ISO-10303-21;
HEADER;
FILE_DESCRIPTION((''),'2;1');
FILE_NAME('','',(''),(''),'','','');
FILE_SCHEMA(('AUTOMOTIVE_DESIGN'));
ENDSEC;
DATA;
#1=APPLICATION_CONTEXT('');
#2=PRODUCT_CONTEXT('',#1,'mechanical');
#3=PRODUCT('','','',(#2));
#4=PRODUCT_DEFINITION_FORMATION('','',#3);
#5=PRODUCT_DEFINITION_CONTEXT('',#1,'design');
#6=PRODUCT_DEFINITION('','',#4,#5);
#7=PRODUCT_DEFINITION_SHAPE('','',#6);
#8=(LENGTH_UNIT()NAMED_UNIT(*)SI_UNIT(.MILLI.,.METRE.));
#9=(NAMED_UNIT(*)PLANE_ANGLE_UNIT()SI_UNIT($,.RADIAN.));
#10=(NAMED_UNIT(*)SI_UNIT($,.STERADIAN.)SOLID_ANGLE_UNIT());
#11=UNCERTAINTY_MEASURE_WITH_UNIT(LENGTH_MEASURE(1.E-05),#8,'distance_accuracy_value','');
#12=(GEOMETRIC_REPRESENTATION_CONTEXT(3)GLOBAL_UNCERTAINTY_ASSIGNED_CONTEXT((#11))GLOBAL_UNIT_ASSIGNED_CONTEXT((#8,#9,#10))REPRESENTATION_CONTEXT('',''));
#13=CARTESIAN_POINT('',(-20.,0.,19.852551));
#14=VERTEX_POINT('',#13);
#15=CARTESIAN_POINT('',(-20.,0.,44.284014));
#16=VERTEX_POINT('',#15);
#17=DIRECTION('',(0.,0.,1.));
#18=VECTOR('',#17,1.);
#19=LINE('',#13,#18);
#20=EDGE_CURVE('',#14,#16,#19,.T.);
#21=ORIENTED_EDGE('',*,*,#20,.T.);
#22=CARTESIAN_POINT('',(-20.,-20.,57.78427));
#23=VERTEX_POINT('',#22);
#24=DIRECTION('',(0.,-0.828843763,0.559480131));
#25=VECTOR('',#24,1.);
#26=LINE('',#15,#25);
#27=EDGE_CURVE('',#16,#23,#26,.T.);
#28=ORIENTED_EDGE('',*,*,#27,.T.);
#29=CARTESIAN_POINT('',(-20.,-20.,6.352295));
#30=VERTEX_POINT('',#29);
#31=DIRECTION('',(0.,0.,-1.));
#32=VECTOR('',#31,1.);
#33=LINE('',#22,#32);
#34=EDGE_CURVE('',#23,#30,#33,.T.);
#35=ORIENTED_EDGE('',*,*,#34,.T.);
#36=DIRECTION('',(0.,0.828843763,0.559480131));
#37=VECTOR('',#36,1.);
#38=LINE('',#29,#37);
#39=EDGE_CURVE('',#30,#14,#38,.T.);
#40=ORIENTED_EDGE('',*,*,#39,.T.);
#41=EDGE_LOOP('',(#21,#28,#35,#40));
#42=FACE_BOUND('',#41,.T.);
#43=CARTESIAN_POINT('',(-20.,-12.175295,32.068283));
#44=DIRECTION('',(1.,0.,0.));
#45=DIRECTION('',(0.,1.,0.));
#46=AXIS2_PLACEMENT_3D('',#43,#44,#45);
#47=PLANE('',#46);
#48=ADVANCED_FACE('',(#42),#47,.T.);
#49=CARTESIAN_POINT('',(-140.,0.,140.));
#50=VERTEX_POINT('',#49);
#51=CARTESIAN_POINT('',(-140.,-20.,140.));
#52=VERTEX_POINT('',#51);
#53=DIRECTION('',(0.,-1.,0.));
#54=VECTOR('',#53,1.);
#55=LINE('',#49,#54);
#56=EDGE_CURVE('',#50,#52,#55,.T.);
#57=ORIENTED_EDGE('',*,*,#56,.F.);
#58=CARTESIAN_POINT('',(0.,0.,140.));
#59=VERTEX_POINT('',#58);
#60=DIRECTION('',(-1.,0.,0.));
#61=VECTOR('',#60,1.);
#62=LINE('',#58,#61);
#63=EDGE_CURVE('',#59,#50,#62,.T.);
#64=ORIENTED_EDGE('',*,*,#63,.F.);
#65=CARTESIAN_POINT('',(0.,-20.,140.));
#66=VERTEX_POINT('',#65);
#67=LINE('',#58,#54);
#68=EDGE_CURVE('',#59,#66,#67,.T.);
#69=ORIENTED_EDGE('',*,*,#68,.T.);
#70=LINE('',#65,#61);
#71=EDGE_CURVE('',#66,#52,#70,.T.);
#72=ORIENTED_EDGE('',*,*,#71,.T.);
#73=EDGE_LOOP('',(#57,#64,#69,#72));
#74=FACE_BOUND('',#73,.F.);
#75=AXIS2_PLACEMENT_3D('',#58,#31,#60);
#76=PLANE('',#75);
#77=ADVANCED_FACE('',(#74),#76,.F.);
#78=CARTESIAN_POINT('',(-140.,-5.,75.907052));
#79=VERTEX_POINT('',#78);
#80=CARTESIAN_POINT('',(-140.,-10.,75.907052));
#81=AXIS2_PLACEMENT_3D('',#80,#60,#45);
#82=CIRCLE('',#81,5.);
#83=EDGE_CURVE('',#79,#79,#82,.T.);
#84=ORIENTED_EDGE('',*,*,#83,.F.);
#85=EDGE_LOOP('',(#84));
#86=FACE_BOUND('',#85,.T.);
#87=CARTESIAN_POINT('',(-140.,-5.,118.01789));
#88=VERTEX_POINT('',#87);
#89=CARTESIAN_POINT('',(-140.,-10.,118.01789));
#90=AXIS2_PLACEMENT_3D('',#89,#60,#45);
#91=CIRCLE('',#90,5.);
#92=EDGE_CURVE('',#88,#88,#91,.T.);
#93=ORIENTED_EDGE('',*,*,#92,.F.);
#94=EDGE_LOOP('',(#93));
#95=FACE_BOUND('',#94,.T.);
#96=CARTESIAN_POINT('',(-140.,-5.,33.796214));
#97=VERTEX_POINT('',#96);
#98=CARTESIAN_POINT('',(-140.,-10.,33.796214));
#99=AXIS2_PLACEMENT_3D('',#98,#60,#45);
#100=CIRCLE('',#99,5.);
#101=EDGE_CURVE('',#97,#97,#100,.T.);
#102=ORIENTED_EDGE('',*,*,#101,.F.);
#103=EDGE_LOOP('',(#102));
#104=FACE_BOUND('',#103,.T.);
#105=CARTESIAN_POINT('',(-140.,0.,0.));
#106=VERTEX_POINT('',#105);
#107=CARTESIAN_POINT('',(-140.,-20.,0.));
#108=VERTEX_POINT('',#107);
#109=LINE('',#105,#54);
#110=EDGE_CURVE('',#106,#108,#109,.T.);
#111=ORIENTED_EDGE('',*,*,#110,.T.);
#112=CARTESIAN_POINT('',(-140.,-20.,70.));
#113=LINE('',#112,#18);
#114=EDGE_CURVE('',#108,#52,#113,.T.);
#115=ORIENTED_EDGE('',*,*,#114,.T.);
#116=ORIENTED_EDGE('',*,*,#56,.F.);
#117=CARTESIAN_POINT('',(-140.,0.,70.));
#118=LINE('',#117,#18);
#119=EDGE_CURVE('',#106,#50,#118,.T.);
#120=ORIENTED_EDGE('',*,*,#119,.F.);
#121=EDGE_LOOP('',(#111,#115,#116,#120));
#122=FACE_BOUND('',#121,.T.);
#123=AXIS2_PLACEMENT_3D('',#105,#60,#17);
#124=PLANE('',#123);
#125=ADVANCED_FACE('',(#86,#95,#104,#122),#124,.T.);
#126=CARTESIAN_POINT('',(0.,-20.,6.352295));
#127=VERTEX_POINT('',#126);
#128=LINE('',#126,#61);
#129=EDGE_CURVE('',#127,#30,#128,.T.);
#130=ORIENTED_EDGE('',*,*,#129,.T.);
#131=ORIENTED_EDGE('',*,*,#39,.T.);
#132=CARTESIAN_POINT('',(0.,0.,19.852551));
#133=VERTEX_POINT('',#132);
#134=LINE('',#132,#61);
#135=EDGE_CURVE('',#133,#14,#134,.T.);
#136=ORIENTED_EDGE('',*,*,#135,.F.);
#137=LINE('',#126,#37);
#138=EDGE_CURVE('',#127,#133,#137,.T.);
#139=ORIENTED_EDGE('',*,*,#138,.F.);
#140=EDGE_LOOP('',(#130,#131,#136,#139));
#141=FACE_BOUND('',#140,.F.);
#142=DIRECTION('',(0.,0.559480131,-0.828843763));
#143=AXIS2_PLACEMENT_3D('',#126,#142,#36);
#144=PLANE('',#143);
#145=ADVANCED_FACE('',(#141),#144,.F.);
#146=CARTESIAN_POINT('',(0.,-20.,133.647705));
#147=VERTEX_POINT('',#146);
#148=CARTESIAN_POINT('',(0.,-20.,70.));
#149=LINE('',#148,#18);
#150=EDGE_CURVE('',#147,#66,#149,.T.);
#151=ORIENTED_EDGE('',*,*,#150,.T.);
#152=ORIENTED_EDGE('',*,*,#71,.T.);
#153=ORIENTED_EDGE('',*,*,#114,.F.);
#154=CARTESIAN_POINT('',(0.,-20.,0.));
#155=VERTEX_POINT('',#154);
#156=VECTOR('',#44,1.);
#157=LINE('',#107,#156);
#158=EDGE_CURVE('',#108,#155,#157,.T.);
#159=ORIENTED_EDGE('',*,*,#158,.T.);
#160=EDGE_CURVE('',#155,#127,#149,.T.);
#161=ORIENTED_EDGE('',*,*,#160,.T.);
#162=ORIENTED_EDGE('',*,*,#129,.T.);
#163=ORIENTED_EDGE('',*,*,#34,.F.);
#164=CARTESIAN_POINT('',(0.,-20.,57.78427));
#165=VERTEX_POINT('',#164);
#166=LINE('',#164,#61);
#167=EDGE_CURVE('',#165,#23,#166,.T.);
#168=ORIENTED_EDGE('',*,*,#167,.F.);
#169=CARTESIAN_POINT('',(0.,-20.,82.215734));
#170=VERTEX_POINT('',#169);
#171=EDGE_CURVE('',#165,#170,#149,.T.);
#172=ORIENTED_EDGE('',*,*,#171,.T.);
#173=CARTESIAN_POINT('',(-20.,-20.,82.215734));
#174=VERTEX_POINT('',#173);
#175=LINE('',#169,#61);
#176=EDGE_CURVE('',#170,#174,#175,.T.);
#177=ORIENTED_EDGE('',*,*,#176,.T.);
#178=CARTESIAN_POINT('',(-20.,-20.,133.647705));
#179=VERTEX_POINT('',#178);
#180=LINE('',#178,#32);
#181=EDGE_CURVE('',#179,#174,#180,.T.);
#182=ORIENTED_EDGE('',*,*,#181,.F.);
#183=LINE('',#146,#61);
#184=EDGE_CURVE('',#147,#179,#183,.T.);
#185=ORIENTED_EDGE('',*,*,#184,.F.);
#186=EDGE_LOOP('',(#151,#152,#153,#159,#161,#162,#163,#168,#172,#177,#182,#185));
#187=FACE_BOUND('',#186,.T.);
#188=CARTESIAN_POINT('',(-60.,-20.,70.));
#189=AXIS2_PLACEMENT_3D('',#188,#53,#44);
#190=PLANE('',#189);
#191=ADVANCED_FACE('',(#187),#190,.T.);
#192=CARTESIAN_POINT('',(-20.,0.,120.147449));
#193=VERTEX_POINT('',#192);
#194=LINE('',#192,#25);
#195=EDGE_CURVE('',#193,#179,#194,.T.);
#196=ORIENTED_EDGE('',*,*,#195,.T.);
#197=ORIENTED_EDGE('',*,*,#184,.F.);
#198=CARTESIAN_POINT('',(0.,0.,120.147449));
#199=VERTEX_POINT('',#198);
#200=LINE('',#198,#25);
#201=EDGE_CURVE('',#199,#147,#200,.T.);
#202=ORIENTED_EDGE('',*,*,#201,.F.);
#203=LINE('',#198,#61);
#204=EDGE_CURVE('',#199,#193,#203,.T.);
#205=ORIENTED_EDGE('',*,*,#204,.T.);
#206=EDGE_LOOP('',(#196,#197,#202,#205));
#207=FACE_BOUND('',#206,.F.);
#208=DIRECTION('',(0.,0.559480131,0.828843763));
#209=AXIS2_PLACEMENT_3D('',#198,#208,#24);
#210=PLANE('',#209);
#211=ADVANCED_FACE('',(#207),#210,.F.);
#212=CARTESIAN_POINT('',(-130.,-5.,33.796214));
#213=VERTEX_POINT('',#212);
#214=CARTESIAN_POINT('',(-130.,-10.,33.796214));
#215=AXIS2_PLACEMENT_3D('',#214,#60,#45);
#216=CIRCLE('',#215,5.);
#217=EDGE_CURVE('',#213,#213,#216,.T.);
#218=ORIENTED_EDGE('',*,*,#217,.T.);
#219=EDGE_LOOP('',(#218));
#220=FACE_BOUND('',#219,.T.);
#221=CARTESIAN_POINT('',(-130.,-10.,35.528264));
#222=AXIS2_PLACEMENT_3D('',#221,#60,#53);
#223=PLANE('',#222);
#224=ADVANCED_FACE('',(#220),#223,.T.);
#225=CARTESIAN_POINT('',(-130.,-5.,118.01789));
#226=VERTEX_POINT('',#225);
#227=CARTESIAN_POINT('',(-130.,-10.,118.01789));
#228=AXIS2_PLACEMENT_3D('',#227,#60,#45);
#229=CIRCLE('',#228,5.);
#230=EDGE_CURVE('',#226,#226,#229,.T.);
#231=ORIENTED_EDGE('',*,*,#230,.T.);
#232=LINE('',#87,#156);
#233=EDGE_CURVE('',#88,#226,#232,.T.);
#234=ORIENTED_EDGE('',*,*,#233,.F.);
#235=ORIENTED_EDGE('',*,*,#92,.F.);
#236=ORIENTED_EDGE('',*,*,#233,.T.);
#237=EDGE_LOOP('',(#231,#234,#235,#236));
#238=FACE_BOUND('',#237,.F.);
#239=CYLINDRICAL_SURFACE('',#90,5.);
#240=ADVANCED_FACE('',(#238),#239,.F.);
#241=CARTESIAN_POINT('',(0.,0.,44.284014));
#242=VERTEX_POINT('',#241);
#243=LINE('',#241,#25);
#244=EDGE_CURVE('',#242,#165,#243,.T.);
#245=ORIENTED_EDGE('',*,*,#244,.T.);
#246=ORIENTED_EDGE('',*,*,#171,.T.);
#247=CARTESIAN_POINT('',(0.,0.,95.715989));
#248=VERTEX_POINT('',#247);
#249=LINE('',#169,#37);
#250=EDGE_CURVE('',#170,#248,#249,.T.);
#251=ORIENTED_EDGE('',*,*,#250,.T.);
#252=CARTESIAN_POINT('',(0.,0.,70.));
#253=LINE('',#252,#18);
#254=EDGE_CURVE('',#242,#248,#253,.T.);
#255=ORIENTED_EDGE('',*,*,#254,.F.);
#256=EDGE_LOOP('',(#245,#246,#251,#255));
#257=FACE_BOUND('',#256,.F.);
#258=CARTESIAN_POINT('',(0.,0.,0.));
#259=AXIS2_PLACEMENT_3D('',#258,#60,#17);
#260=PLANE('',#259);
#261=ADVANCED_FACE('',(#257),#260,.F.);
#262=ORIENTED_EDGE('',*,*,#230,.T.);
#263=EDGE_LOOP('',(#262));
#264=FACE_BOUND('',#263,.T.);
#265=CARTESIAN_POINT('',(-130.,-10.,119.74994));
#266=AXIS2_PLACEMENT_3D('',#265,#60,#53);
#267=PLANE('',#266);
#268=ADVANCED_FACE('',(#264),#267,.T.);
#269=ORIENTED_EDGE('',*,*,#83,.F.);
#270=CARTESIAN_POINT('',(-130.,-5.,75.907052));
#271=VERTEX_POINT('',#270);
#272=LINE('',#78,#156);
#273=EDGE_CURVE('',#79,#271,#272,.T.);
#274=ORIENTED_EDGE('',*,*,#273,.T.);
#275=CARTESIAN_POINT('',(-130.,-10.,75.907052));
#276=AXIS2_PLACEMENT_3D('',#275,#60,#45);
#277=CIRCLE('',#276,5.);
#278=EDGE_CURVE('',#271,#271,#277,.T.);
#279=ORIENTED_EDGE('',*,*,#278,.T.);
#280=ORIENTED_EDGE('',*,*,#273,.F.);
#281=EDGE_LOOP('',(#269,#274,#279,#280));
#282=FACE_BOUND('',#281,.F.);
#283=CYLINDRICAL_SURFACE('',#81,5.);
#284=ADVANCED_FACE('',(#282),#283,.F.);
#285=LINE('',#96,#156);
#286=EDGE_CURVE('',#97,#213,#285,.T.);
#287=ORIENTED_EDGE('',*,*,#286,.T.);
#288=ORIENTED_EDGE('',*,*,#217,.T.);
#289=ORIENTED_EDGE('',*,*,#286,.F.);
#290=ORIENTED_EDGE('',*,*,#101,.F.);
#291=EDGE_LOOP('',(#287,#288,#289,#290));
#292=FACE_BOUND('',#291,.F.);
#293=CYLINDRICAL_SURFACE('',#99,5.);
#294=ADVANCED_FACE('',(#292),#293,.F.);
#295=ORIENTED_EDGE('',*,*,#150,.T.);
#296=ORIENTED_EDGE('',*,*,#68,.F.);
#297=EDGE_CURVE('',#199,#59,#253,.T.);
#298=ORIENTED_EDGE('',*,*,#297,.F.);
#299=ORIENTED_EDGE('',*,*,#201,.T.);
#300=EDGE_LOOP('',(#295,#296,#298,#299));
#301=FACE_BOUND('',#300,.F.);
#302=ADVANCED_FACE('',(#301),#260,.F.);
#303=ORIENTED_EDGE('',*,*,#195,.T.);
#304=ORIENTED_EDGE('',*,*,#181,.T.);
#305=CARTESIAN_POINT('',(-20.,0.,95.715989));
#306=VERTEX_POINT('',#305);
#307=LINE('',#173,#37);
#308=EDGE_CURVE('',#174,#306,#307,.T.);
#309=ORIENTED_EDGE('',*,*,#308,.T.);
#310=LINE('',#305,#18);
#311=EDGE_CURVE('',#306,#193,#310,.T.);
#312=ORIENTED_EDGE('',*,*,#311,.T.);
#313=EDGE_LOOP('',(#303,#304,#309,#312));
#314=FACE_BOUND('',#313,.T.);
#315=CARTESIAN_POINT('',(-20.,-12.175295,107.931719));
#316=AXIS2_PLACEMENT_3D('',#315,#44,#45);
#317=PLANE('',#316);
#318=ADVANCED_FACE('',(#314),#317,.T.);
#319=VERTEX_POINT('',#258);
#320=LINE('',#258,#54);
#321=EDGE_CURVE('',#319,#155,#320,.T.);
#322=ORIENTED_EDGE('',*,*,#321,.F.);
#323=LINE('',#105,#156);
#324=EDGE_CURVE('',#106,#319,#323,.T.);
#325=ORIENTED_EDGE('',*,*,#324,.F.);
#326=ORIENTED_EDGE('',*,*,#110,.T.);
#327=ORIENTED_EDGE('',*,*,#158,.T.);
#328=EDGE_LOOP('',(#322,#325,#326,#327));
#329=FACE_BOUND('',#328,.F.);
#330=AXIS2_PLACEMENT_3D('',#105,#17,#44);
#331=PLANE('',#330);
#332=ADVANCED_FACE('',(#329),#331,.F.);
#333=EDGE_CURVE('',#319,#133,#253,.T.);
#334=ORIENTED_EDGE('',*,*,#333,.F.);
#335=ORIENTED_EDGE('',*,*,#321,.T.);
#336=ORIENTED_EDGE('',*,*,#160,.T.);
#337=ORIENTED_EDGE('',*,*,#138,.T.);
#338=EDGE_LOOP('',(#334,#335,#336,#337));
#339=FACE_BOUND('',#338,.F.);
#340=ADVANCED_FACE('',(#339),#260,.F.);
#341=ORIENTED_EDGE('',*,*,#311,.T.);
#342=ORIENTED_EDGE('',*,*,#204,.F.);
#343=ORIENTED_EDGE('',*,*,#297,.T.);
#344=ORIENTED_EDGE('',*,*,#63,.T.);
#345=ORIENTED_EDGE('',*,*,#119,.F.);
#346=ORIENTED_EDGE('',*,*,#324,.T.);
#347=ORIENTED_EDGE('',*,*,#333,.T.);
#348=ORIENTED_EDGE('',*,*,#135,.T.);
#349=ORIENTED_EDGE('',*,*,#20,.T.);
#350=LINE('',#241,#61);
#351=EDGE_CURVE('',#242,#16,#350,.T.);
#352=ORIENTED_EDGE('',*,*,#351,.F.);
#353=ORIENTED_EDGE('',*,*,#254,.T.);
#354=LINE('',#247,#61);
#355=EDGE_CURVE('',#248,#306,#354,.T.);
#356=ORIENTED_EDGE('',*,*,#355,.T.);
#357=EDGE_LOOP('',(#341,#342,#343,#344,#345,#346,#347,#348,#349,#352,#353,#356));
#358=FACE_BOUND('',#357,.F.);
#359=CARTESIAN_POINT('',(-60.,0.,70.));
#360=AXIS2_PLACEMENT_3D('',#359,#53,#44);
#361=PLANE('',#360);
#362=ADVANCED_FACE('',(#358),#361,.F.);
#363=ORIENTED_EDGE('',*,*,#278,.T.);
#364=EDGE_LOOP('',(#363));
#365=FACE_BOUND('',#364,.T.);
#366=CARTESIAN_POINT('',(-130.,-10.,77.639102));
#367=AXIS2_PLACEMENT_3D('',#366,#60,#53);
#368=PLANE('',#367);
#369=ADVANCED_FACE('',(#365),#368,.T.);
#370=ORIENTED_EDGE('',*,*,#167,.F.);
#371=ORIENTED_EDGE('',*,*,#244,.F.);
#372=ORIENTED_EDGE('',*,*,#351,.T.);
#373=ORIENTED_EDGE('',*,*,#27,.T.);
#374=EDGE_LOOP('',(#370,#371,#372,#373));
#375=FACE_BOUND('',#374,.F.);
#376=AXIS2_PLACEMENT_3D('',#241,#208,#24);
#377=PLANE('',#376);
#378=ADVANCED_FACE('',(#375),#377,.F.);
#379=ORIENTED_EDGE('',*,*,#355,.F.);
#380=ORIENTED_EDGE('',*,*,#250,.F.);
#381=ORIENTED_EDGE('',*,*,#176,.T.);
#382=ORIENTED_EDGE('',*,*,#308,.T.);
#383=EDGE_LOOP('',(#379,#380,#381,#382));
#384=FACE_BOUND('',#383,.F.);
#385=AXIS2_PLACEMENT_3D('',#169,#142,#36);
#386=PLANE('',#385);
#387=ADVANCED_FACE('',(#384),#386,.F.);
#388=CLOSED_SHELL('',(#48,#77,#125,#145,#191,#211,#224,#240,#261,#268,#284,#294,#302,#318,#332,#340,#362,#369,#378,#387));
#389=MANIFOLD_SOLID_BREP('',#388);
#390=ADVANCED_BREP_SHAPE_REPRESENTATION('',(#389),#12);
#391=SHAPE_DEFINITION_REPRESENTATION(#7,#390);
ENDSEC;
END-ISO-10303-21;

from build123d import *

# Parameters (mm, degrees)
F0_W     = 120
F0_H     = 140
F0_W_2   = 20
F1_DEPTH = 20
F3_DEPTH = 20
F5_DEPTH = 10


# Not quite as in the source:
# - ends of sketch curves that miss each other by under 0.0002 mm in the source are joined


with BuildPart() as f1:
    # F0 (on Front) → F1 (new body)
    with BuildSketch(Plane.XZ):
        with Locations((-60, 70)):
            Rectangle(F0_W, F0_H)
        with Locations((-130, 70)):
            Rectangle(F0_W_2, F0_H)
    extrude(amount=F1_DEPTH)

    # F2 (on face) → F3 (cut)
    with BuildSketch(Plane.YZ):
        Polygon((-20, 133.6477049324), (-20, 82.2157338262), (0, 95.7159893793), (0, 120.1474493793), align=None)
        Polygon((0, 44.2840144469), (-20, 57.78427), (-20, 6.3522950676), (0, 19.8525506207), align=None)
    extrude(amount=-F3_DEPTH, mode=Mode.SUBTRACT)

    # F4 (on face) → F5 (cut)
    with BuildSketch(Plane(origin=(-140, 0, 0), x_dir=(0, -1, 0), z_dir=(-1, 0, 0))):
        with BuildLine():
            ThreePointArc((15, 75.9070515633), (10, 80.9070515633), (5, 75.9070515633))
            Line((5, 75.9070515633), (15, 75.9070515633))
        make_face()
        with BuildLine():
            Line((15, 75.9070515633), (5, 75.9070515633))
            ThreePointArc((5, 75.9070515633), (10, 70.9070515633), (15, 75.9070515633))
        make_face()
        with BuildLine():
            ThreePointArc((15, 33.7962135673), (10, 38.7962135673), (5, 33.7962135673))
            Line((5, 33.7962135673), (15, 33.7962135673))
        make_face()
        with BuildLine():
            Line((15, 33.7962135673), (5, 33.7962135673))
            ThreePointArc((5, 33.7962135673), (10, 28.7962135673), (15, 33.7962135673))
        make_face()
        with BuildLine():
            ThreePointArc((15, 118.0178895593), (10, 123.0178895593), (5, 118.0178895593))
            Line((5, 118.0178895593), (15, 118.0178895593))
        make_face()
        with BuildLine():
            Line((15, 118.0178895593), (5, 118.0178895593))
            ThreePointArc((5, 118.0178895593), (10, 113.0178895593), (15, 118.0178895593))
        make_face()
    extrude(amount=-F5_DEPTH, mode=Mode.SUBTRACT)


solid = f1.part
